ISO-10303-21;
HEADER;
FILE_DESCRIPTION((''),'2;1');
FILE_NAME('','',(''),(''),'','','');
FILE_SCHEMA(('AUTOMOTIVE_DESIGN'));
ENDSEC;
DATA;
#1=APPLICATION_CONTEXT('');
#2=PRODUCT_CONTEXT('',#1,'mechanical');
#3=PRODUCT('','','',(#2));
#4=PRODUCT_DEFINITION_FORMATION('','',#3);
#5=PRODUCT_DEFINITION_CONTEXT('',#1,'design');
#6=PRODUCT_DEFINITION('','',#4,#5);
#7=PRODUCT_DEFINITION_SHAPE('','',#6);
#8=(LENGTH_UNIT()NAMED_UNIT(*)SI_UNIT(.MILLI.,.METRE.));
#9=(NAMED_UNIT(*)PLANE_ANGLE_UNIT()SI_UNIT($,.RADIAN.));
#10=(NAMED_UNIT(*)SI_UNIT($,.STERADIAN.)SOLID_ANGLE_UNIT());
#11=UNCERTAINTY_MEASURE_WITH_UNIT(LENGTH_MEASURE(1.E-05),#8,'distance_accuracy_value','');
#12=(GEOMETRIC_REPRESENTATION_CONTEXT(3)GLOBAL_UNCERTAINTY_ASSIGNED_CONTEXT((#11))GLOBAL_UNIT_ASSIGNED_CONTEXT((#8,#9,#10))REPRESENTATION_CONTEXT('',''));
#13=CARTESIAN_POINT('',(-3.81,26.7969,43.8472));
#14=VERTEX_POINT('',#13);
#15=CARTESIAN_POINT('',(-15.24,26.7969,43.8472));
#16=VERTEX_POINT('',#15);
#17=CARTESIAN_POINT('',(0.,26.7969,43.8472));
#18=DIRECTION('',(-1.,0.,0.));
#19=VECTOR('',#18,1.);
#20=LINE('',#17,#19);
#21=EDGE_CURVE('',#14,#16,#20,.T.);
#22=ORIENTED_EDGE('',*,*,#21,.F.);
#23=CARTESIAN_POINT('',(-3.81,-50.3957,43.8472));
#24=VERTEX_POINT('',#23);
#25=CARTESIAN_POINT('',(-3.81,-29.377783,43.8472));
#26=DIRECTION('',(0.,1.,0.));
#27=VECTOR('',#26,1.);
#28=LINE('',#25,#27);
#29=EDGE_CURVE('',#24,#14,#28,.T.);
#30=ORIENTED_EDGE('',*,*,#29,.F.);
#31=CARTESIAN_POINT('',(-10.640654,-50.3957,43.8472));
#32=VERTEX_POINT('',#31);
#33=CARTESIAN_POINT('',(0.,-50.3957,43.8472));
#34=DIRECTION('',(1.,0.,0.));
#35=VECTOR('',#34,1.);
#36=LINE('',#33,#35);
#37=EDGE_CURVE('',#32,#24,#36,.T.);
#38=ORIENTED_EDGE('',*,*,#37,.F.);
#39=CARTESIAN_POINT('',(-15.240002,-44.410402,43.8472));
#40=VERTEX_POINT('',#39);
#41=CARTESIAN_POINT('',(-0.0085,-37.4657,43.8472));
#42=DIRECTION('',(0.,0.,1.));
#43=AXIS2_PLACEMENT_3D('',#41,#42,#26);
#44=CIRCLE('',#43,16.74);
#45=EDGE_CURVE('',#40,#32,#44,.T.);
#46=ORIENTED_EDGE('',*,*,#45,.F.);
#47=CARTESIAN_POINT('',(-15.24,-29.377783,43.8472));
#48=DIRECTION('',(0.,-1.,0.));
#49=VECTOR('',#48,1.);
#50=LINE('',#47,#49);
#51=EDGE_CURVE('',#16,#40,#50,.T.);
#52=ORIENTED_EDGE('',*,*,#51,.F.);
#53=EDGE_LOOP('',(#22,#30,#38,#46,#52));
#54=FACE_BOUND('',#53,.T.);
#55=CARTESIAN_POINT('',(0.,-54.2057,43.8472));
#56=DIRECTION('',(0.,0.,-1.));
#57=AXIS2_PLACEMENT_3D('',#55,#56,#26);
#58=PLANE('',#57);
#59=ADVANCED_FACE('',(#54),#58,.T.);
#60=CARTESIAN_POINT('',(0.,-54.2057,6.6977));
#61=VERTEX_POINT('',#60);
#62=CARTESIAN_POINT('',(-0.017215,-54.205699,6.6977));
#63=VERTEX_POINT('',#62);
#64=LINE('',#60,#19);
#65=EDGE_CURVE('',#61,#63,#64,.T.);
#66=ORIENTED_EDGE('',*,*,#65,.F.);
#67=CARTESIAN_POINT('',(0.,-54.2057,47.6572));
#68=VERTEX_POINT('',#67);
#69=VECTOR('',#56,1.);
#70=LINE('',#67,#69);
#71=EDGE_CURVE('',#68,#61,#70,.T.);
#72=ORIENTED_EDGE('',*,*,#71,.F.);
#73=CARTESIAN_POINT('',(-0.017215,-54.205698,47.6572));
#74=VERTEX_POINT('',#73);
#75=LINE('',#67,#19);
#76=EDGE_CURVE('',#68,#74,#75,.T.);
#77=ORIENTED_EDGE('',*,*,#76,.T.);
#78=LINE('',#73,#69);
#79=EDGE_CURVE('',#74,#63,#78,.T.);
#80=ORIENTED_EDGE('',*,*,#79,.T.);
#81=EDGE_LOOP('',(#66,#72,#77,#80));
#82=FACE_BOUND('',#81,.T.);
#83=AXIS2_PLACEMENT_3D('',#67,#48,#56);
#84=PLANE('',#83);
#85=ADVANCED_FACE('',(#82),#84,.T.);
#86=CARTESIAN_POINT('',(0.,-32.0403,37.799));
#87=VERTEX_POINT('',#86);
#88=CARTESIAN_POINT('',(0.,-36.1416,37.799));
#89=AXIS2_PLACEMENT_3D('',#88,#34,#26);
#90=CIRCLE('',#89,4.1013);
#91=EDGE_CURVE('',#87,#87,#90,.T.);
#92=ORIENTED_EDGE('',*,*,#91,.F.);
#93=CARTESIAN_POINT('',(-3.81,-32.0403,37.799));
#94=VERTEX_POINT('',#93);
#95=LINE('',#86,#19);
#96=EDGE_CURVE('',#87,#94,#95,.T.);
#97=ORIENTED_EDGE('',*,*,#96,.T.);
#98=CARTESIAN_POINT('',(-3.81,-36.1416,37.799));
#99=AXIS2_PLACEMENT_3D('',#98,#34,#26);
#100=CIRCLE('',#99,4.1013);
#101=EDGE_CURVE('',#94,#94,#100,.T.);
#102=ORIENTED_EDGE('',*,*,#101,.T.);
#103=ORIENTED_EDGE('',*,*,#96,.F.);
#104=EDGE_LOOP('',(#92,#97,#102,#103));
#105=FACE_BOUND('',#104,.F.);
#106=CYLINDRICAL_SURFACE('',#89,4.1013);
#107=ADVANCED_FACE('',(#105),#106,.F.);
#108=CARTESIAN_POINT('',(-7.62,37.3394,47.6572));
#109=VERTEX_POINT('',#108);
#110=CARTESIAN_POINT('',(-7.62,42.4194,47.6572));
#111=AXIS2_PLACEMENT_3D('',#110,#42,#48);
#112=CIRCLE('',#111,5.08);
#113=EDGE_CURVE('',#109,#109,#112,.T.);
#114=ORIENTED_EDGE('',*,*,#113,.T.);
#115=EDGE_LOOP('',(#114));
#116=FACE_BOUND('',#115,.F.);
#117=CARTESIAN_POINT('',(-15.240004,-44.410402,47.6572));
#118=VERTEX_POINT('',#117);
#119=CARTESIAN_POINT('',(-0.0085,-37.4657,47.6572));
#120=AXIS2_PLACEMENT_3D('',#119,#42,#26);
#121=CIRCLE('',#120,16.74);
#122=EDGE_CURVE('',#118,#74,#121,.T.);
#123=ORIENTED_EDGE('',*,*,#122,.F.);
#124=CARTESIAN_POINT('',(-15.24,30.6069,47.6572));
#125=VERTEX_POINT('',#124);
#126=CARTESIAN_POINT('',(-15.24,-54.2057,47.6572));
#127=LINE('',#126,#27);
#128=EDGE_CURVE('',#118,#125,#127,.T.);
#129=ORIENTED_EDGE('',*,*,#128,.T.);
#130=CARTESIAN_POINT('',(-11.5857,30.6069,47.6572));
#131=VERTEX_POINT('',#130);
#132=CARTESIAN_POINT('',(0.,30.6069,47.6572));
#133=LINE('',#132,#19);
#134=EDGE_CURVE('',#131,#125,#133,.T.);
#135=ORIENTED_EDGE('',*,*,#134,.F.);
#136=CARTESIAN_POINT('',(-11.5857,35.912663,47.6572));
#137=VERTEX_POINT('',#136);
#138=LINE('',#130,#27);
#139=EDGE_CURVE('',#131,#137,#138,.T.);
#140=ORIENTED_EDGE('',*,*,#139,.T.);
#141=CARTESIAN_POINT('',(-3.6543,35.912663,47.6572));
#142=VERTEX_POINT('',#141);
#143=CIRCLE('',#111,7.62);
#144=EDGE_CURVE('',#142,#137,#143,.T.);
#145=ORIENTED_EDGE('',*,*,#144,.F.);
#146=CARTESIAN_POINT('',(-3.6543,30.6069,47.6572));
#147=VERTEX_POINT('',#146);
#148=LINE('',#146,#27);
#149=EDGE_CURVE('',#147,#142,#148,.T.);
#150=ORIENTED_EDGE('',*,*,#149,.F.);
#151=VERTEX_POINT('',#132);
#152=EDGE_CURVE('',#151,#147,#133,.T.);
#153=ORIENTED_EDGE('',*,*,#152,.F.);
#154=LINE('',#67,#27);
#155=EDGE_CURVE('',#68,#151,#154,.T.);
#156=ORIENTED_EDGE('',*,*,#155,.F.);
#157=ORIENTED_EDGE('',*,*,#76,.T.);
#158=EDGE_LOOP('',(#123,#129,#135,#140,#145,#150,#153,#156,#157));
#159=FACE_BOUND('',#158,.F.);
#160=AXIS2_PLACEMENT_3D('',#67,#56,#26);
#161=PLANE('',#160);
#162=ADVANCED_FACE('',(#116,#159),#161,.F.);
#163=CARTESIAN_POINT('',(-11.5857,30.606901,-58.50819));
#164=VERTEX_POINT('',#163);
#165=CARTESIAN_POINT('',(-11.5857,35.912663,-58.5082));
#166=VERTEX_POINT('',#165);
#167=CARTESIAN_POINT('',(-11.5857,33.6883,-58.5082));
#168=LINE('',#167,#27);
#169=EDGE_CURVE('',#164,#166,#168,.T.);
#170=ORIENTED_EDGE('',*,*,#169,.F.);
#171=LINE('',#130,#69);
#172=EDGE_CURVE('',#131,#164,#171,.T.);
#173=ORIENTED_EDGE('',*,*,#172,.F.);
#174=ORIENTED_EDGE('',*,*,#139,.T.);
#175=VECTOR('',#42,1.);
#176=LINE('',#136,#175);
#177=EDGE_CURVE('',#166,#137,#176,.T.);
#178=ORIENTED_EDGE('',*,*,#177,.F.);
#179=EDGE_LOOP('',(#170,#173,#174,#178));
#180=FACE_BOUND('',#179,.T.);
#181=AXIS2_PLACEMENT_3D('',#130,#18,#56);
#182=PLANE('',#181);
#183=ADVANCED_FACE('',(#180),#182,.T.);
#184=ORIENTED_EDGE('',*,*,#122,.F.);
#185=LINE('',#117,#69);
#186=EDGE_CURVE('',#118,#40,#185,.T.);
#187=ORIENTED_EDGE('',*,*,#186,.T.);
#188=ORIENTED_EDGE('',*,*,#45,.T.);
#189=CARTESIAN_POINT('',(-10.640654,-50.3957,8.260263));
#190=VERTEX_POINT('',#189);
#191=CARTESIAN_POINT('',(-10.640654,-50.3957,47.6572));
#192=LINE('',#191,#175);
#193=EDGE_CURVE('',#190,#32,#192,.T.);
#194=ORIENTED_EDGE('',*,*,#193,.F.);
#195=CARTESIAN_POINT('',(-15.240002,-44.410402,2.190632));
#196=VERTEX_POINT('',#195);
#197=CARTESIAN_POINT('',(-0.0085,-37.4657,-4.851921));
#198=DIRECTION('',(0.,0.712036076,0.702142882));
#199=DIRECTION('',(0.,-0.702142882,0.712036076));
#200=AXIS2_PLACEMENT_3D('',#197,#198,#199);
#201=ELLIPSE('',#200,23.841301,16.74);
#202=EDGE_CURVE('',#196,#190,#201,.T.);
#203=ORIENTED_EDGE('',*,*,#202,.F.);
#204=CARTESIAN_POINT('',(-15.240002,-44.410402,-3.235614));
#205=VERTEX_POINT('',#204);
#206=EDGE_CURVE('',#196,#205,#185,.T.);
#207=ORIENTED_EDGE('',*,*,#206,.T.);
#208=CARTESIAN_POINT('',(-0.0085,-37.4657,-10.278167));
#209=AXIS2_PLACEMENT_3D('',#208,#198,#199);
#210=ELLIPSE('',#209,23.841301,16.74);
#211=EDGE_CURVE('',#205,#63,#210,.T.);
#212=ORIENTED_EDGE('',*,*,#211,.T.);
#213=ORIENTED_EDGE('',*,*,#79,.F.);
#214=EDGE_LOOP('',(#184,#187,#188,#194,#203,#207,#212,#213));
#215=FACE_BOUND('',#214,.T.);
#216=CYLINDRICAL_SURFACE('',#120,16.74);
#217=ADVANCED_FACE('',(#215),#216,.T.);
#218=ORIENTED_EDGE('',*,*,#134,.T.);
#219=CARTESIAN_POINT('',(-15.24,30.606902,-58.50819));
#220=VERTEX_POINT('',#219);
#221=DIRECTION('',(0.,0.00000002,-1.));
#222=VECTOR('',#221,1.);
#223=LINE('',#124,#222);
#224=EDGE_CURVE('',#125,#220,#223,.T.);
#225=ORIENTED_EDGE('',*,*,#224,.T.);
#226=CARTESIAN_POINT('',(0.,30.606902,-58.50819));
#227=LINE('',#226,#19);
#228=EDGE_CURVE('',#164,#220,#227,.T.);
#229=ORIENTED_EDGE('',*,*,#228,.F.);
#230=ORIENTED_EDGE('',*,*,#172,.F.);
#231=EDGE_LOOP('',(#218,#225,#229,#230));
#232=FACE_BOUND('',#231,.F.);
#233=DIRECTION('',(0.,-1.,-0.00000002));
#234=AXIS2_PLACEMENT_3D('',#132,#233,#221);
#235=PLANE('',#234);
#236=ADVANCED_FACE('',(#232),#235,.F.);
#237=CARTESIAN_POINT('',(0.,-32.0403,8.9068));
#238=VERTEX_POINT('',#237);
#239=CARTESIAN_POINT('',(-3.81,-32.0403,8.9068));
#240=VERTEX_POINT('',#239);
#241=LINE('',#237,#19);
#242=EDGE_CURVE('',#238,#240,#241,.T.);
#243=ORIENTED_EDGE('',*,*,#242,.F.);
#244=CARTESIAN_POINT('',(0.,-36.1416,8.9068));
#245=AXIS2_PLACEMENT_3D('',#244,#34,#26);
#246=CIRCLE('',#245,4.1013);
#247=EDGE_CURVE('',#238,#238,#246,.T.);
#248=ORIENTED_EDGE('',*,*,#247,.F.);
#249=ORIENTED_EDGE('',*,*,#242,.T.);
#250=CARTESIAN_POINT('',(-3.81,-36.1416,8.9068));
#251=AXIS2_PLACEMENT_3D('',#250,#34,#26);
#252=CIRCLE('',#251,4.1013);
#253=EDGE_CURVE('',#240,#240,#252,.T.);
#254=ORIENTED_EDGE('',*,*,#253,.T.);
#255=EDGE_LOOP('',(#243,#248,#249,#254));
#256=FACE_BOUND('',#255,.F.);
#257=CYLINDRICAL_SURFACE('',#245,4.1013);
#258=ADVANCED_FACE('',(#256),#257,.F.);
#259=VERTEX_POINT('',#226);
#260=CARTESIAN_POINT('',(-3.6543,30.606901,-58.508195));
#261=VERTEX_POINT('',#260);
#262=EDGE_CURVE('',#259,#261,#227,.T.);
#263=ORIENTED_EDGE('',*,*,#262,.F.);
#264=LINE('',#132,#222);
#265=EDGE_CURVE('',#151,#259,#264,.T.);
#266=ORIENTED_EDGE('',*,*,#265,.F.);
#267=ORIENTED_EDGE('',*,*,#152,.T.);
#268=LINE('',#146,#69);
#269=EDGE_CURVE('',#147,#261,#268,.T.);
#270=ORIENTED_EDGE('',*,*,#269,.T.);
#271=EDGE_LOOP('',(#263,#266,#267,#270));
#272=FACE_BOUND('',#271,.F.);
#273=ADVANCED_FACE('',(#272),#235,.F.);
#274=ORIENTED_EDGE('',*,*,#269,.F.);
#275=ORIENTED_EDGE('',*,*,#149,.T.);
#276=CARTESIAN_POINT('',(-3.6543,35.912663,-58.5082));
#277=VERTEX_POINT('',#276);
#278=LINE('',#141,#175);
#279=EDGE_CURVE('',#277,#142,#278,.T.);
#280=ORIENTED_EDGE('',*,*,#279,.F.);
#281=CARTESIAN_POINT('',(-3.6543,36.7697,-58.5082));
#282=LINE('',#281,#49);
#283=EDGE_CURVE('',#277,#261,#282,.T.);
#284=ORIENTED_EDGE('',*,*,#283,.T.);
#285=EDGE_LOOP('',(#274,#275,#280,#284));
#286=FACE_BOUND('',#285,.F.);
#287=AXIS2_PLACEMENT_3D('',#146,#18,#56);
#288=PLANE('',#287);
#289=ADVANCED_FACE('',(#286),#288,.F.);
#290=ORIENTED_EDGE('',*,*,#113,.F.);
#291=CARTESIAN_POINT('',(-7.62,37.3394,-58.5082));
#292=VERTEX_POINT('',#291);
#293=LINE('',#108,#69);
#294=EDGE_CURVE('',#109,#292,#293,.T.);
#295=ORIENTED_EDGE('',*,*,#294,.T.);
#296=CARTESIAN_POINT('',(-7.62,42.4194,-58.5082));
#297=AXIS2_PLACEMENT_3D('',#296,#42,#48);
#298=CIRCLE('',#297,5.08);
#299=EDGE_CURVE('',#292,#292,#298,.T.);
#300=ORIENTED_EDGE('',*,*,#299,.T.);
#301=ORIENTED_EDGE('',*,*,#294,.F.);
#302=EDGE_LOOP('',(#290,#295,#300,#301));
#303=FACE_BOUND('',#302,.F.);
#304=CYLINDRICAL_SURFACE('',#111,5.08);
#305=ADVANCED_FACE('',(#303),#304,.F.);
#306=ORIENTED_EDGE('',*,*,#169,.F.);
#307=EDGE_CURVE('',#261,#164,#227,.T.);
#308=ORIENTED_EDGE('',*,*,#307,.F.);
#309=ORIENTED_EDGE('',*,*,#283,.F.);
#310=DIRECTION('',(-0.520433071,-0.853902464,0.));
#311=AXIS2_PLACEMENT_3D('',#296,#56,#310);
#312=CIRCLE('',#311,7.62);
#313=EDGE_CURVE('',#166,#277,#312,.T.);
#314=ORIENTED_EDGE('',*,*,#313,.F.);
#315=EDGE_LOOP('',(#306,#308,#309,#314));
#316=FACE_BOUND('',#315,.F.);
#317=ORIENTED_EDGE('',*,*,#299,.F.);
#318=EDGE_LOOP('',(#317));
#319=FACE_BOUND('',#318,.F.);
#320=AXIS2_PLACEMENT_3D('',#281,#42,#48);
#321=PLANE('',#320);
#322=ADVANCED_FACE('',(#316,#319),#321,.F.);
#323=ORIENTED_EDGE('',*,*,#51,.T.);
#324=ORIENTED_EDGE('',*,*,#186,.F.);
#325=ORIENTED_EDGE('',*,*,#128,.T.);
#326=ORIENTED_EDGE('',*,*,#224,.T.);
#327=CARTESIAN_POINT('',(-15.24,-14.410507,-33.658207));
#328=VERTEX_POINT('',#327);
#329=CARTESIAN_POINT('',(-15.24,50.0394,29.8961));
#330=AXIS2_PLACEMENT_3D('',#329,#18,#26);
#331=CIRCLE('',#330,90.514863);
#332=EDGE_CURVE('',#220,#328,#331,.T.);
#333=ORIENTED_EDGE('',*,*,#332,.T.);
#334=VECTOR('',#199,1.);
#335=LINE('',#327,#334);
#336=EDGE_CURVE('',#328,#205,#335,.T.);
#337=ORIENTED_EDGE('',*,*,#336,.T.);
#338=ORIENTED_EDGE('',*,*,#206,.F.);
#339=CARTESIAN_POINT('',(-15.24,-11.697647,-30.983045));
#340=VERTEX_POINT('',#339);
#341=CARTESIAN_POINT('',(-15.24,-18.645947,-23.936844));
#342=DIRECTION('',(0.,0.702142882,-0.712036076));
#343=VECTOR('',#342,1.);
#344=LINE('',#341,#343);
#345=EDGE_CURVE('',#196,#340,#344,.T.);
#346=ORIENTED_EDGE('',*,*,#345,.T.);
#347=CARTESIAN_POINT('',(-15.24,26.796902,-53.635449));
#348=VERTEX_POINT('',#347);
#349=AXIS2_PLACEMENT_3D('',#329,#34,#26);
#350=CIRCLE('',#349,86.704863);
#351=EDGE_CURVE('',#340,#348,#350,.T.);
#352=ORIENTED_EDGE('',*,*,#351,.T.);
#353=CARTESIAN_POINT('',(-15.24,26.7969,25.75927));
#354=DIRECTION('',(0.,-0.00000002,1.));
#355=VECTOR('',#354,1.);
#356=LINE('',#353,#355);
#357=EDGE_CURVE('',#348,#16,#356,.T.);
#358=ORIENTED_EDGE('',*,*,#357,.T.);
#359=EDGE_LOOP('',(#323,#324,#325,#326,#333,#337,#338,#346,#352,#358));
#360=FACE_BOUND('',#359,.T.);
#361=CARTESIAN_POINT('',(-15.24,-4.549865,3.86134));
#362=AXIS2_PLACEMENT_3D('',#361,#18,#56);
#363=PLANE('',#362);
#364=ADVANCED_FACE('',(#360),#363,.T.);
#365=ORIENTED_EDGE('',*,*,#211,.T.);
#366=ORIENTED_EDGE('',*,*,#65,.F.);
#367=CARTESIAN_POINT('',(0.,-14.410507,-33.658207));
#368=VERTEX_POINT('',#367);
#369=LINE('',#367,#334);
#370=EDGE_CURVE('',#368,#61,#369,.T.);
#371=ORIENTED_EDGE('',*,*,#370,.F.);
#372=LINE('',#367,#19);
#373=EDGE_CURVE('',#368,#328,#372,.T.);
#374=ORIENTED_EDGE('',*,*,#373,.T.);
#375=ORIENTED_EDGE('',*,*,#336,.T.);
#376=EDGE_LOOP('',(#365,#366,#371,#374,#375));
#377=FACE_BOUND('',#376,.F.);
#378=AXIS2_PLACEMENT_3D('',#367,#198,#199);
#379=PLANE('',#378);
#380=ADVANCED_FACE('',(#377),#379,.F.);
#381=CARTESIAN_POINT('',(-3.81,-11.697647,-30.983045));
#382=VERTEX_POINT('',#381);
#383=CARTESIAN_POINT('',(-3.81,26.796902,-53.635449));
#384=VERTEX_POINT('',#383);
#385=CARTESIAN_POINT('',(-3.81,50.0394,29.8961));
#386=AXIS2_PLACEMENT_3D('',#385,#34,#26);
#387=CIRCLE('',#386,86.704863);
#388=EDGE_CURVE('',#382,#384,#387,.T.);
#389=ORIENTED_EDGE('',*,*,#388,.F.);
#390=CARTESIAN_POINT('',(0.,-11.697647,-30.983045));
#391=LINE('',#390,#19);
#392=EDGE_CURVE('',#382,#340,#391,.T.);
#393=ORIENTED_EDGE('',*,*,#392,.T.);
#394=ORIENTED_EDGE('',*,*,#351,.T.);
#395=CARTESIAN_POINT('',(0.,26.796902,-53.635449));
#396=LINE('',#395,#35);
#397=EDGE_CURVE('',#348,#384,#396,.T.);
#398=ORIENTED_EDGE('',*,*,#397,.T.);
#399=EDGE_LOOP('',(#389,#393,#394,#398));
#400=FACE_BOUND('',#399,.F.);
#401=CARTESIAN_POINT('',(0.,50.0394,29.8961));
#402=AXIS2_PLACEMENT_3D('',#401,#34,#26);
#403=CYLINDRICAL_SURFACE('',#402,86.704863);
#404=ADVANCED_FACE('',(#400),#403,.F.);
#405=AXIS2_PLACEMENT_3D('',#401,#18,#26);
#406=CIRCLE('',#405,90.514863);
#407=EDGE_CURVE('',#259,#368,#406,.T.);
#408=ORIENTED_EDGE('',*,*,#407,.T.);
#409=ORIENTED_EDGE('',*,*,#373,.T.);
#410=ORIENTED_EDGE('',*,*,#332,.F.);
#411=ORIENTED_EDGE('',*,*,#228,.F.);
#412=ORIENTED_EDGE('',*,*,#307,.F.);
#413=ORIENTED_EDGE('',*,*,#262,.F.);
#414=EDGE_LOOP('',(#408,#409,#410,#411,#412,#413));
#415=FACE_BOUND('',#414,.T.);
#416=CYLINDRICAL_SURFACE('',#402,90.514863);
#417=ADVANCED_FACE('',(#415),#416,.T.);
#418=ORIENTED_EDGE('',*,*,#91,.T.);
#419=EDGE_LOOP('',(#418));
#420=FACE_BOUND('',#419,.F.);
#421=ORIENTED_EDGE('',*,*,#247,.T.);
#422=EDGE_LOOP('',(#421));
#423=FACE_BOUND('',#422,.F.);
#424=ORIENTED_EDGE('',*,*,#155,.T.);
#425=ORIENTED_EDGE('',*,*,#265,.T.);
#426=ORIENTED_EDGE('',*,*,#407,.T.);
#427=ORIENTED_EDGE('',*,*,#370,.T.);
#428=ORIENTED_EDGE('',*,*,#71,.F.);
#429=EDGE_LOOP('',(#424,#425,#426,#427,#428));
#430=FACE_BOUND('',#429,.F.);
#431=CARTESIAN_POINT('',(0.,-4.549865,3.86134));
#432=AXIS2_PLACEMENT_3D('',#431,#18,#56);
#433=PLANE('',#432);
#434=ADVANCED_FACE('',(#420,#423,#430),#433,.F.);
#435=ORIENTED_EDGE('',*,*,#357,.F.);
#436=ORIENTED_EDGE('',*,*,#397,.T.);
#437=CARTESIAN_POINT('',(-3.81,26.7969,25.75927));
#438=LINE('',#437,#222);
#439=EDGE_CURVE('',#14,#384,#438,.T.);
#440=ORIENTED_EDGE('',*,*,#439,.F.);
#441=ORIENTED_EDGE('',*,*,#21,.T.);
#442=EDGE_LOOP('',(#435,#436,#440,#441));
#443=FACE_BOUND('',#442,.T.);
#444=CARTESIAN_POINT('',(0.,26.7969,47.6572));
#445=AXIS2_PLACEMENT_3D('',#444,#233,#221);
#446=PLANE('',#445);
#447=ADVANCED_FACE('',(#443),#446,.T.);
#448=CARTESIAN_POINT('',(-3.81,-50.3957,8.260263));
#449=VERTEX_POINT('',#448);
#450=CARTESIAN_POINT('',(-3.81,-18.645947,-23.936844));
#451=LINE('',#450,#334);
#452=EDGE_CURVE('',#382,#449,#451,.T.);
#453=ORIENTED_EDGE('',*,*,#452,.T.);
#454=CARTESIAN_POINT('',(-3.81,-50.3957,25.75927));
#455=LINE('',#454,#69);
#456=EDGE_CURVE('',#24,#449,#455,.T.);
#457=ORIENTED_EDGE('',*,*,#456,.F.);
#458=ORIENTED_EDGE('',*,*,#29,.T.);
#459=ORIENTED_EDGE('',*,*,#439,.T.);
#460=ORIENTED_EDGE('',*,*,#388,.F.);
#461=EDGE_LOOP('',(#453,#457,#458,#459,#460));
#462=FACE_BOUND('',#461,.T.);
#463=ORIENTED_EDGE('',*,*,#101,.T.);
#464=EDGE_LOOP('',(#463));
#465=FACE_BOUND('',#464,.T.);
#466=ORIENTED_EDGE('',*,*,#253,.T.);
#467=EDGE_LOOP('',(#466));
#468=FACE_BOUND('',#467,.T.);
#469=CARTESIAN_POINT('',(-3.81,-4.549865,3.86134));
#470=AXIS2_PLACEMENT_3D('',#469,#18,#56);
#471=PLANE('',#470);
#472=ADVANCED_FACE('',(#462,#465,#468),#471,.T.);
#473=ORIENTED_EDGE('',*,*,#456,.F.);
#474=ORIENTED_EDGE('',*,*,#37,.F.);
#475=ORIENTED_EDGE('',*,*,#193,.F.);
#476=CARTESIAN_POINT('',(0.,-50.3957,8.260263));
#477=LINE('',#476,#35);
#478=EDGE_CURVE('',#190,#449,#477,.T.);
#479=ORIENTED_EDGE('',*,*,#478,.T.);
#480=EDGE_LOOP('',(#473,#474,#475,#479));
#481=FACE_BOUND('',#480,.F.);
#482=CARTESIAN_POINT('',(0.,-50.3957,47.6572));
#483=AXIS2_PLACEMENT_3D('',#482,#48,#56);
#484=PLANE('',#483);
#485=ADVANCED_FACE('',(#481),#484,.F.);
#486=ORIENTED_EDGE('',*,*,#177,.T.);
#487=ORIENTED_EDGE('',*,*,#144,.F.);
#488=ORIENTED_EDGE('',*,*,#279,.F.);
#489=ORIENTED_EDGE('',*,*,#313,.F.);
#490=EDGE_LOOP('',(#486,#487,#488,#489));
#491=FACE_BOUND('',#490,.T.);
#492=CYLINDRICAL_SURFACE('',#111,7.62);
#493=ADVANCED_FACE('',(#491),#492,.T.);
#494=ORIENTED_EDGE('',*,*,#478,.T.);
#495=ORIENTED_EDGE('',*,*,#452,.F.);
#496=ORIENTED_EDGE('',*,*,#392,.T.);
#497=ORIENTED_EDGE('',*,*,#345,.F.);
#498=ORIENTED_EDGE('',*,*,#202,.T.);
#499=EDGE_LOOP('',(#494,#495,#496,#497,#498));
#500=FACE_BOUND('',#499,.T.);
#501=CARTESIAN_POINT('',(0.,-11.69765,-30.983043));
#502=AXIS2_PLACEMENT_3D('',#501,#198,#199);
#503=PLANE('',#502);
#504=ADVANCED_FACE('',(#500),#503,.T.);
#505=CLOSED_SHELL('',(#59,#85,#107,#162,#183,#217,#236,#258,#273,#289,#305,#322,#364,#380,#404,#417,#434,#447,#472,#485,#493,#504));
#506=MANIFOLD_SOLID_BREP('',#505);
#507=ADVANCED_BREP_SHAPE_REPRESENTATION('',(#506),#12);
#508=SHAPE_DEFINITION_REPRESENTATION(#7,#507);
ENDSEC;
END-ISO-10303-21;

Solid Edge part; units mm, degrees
sketch "Sketch1" plane through (0, 0, 0) normal (1, 0, 0) x (0, 1, 0)
  line L0 (-14.4105, -33.6582) -> (-54.2057, 6.6977)
  line L1 (-54.2057, 47.6572) -> (-54.2057, 6.6977)
  line L2 (-54.2057, 47.6572) -> (30.6069, 47.6572)
  line L3 (30.6069, 47.6572) -> (30.6069, -58.5082)
  arc A0 (30.6069, -58.5082) -> (-14.4105, -33.6582) centre (50.0394, 29.8961) cw
extrude "Protrusion1" add sketch "Sketch1" against normal blind 15.24
shell "Thinwall_3" thickness 3.81 removed faces 1 at (-15.24, 15.6233, 31.0246)
sketch "Sketch2" plane through (-7.62, -9.7031, 47.6572) normal (0, 0, 1) x (0, -1, 0)
  circle A0 centre (-52.1225, 0) radius 7.62
extrude "Protrusion2" add sketch "Sketch2" against normal up to vertex (106.1654 mm away)
sketch "Sketch3" plane through (-7.62, -9.7031, 47.6572) normal (0, 0, 1) x (0, -1, 0)
  circle A0 centre (-52.1225, 0) radius 5.08
extrude "ExtrudedCutout_4" cut sketch "Sketch3" against normal blind 129.2134
sketch "Sketch4" plane through (-7.62, 30.6069, -5.4255) normal (0, 1, 0) x (0, 0, -1)
  line L0 (-53.0827, 3.9657) -> (-53.0827, 0)
  line L1 (-53.0827, 0) -> (-53.0827, -3.9657)
  line L2 (-53.0827, -3.9657) -> (55.1975, -3.9657)
  line L3 (55.1975, -3.9657) -> (55.1975, 3.9657)
  line L4 (-53.0827, 3.9657) -> (55.1975, 3.9657)
extrude "ExtrudedProtrusion_14" add sketch "Sketch4" along normal blind 6.1628
sketch "Sketch5" plane through (-7.62, -2.0831, 47.6572) normal (0, 0, 1) x (0, 1, 0)
  line L0 (-52.1225, 7.62) -> (-52.1225, -7.62)
  line L1 (-52.1225, 7.62) -> (-42.3273, 7.62)
  arc A0 (-42.3273, 7.62) -> (-52.1226, -7.62) centre (-35.3826, -7.6115) ccw
extrude "ExtrudedCutout_5" cut sketch "Sketch5" against normal blind 61.7549
sketch "Sketch6" plane through (-3.6543, 33.6883, -6.4829) normal (1, 0, 0) x (0, 0, -1)
  line L0 (52.0253, 3.0814) -> (52.0253, -3.0814)
  line L1 (52.0253, -3.0814) -> (54.1401, -3.0814)
  line L2 (54.1401, -3.0814) -> (54.1401, 3.0814)
  line L3 (54.1401, 3.0814) -> (52.0253, 3.0814)
extrude "Cutout1" cut sketch "Sketch6" against normal blind 271.2891
sketch "Sketch7" plane through (0, -11.7994, -5.4255) normal (1, 0, 0) x (0, 1, 0)
  circle A0 centre (-24.3422, 43.2245) radius 4.1013
  circle A1 centre (-24.3422, 14.3323) radius 4.1013
extrude "Cutout2" cut sketch "Sketch7" against normal blind 48.3927
